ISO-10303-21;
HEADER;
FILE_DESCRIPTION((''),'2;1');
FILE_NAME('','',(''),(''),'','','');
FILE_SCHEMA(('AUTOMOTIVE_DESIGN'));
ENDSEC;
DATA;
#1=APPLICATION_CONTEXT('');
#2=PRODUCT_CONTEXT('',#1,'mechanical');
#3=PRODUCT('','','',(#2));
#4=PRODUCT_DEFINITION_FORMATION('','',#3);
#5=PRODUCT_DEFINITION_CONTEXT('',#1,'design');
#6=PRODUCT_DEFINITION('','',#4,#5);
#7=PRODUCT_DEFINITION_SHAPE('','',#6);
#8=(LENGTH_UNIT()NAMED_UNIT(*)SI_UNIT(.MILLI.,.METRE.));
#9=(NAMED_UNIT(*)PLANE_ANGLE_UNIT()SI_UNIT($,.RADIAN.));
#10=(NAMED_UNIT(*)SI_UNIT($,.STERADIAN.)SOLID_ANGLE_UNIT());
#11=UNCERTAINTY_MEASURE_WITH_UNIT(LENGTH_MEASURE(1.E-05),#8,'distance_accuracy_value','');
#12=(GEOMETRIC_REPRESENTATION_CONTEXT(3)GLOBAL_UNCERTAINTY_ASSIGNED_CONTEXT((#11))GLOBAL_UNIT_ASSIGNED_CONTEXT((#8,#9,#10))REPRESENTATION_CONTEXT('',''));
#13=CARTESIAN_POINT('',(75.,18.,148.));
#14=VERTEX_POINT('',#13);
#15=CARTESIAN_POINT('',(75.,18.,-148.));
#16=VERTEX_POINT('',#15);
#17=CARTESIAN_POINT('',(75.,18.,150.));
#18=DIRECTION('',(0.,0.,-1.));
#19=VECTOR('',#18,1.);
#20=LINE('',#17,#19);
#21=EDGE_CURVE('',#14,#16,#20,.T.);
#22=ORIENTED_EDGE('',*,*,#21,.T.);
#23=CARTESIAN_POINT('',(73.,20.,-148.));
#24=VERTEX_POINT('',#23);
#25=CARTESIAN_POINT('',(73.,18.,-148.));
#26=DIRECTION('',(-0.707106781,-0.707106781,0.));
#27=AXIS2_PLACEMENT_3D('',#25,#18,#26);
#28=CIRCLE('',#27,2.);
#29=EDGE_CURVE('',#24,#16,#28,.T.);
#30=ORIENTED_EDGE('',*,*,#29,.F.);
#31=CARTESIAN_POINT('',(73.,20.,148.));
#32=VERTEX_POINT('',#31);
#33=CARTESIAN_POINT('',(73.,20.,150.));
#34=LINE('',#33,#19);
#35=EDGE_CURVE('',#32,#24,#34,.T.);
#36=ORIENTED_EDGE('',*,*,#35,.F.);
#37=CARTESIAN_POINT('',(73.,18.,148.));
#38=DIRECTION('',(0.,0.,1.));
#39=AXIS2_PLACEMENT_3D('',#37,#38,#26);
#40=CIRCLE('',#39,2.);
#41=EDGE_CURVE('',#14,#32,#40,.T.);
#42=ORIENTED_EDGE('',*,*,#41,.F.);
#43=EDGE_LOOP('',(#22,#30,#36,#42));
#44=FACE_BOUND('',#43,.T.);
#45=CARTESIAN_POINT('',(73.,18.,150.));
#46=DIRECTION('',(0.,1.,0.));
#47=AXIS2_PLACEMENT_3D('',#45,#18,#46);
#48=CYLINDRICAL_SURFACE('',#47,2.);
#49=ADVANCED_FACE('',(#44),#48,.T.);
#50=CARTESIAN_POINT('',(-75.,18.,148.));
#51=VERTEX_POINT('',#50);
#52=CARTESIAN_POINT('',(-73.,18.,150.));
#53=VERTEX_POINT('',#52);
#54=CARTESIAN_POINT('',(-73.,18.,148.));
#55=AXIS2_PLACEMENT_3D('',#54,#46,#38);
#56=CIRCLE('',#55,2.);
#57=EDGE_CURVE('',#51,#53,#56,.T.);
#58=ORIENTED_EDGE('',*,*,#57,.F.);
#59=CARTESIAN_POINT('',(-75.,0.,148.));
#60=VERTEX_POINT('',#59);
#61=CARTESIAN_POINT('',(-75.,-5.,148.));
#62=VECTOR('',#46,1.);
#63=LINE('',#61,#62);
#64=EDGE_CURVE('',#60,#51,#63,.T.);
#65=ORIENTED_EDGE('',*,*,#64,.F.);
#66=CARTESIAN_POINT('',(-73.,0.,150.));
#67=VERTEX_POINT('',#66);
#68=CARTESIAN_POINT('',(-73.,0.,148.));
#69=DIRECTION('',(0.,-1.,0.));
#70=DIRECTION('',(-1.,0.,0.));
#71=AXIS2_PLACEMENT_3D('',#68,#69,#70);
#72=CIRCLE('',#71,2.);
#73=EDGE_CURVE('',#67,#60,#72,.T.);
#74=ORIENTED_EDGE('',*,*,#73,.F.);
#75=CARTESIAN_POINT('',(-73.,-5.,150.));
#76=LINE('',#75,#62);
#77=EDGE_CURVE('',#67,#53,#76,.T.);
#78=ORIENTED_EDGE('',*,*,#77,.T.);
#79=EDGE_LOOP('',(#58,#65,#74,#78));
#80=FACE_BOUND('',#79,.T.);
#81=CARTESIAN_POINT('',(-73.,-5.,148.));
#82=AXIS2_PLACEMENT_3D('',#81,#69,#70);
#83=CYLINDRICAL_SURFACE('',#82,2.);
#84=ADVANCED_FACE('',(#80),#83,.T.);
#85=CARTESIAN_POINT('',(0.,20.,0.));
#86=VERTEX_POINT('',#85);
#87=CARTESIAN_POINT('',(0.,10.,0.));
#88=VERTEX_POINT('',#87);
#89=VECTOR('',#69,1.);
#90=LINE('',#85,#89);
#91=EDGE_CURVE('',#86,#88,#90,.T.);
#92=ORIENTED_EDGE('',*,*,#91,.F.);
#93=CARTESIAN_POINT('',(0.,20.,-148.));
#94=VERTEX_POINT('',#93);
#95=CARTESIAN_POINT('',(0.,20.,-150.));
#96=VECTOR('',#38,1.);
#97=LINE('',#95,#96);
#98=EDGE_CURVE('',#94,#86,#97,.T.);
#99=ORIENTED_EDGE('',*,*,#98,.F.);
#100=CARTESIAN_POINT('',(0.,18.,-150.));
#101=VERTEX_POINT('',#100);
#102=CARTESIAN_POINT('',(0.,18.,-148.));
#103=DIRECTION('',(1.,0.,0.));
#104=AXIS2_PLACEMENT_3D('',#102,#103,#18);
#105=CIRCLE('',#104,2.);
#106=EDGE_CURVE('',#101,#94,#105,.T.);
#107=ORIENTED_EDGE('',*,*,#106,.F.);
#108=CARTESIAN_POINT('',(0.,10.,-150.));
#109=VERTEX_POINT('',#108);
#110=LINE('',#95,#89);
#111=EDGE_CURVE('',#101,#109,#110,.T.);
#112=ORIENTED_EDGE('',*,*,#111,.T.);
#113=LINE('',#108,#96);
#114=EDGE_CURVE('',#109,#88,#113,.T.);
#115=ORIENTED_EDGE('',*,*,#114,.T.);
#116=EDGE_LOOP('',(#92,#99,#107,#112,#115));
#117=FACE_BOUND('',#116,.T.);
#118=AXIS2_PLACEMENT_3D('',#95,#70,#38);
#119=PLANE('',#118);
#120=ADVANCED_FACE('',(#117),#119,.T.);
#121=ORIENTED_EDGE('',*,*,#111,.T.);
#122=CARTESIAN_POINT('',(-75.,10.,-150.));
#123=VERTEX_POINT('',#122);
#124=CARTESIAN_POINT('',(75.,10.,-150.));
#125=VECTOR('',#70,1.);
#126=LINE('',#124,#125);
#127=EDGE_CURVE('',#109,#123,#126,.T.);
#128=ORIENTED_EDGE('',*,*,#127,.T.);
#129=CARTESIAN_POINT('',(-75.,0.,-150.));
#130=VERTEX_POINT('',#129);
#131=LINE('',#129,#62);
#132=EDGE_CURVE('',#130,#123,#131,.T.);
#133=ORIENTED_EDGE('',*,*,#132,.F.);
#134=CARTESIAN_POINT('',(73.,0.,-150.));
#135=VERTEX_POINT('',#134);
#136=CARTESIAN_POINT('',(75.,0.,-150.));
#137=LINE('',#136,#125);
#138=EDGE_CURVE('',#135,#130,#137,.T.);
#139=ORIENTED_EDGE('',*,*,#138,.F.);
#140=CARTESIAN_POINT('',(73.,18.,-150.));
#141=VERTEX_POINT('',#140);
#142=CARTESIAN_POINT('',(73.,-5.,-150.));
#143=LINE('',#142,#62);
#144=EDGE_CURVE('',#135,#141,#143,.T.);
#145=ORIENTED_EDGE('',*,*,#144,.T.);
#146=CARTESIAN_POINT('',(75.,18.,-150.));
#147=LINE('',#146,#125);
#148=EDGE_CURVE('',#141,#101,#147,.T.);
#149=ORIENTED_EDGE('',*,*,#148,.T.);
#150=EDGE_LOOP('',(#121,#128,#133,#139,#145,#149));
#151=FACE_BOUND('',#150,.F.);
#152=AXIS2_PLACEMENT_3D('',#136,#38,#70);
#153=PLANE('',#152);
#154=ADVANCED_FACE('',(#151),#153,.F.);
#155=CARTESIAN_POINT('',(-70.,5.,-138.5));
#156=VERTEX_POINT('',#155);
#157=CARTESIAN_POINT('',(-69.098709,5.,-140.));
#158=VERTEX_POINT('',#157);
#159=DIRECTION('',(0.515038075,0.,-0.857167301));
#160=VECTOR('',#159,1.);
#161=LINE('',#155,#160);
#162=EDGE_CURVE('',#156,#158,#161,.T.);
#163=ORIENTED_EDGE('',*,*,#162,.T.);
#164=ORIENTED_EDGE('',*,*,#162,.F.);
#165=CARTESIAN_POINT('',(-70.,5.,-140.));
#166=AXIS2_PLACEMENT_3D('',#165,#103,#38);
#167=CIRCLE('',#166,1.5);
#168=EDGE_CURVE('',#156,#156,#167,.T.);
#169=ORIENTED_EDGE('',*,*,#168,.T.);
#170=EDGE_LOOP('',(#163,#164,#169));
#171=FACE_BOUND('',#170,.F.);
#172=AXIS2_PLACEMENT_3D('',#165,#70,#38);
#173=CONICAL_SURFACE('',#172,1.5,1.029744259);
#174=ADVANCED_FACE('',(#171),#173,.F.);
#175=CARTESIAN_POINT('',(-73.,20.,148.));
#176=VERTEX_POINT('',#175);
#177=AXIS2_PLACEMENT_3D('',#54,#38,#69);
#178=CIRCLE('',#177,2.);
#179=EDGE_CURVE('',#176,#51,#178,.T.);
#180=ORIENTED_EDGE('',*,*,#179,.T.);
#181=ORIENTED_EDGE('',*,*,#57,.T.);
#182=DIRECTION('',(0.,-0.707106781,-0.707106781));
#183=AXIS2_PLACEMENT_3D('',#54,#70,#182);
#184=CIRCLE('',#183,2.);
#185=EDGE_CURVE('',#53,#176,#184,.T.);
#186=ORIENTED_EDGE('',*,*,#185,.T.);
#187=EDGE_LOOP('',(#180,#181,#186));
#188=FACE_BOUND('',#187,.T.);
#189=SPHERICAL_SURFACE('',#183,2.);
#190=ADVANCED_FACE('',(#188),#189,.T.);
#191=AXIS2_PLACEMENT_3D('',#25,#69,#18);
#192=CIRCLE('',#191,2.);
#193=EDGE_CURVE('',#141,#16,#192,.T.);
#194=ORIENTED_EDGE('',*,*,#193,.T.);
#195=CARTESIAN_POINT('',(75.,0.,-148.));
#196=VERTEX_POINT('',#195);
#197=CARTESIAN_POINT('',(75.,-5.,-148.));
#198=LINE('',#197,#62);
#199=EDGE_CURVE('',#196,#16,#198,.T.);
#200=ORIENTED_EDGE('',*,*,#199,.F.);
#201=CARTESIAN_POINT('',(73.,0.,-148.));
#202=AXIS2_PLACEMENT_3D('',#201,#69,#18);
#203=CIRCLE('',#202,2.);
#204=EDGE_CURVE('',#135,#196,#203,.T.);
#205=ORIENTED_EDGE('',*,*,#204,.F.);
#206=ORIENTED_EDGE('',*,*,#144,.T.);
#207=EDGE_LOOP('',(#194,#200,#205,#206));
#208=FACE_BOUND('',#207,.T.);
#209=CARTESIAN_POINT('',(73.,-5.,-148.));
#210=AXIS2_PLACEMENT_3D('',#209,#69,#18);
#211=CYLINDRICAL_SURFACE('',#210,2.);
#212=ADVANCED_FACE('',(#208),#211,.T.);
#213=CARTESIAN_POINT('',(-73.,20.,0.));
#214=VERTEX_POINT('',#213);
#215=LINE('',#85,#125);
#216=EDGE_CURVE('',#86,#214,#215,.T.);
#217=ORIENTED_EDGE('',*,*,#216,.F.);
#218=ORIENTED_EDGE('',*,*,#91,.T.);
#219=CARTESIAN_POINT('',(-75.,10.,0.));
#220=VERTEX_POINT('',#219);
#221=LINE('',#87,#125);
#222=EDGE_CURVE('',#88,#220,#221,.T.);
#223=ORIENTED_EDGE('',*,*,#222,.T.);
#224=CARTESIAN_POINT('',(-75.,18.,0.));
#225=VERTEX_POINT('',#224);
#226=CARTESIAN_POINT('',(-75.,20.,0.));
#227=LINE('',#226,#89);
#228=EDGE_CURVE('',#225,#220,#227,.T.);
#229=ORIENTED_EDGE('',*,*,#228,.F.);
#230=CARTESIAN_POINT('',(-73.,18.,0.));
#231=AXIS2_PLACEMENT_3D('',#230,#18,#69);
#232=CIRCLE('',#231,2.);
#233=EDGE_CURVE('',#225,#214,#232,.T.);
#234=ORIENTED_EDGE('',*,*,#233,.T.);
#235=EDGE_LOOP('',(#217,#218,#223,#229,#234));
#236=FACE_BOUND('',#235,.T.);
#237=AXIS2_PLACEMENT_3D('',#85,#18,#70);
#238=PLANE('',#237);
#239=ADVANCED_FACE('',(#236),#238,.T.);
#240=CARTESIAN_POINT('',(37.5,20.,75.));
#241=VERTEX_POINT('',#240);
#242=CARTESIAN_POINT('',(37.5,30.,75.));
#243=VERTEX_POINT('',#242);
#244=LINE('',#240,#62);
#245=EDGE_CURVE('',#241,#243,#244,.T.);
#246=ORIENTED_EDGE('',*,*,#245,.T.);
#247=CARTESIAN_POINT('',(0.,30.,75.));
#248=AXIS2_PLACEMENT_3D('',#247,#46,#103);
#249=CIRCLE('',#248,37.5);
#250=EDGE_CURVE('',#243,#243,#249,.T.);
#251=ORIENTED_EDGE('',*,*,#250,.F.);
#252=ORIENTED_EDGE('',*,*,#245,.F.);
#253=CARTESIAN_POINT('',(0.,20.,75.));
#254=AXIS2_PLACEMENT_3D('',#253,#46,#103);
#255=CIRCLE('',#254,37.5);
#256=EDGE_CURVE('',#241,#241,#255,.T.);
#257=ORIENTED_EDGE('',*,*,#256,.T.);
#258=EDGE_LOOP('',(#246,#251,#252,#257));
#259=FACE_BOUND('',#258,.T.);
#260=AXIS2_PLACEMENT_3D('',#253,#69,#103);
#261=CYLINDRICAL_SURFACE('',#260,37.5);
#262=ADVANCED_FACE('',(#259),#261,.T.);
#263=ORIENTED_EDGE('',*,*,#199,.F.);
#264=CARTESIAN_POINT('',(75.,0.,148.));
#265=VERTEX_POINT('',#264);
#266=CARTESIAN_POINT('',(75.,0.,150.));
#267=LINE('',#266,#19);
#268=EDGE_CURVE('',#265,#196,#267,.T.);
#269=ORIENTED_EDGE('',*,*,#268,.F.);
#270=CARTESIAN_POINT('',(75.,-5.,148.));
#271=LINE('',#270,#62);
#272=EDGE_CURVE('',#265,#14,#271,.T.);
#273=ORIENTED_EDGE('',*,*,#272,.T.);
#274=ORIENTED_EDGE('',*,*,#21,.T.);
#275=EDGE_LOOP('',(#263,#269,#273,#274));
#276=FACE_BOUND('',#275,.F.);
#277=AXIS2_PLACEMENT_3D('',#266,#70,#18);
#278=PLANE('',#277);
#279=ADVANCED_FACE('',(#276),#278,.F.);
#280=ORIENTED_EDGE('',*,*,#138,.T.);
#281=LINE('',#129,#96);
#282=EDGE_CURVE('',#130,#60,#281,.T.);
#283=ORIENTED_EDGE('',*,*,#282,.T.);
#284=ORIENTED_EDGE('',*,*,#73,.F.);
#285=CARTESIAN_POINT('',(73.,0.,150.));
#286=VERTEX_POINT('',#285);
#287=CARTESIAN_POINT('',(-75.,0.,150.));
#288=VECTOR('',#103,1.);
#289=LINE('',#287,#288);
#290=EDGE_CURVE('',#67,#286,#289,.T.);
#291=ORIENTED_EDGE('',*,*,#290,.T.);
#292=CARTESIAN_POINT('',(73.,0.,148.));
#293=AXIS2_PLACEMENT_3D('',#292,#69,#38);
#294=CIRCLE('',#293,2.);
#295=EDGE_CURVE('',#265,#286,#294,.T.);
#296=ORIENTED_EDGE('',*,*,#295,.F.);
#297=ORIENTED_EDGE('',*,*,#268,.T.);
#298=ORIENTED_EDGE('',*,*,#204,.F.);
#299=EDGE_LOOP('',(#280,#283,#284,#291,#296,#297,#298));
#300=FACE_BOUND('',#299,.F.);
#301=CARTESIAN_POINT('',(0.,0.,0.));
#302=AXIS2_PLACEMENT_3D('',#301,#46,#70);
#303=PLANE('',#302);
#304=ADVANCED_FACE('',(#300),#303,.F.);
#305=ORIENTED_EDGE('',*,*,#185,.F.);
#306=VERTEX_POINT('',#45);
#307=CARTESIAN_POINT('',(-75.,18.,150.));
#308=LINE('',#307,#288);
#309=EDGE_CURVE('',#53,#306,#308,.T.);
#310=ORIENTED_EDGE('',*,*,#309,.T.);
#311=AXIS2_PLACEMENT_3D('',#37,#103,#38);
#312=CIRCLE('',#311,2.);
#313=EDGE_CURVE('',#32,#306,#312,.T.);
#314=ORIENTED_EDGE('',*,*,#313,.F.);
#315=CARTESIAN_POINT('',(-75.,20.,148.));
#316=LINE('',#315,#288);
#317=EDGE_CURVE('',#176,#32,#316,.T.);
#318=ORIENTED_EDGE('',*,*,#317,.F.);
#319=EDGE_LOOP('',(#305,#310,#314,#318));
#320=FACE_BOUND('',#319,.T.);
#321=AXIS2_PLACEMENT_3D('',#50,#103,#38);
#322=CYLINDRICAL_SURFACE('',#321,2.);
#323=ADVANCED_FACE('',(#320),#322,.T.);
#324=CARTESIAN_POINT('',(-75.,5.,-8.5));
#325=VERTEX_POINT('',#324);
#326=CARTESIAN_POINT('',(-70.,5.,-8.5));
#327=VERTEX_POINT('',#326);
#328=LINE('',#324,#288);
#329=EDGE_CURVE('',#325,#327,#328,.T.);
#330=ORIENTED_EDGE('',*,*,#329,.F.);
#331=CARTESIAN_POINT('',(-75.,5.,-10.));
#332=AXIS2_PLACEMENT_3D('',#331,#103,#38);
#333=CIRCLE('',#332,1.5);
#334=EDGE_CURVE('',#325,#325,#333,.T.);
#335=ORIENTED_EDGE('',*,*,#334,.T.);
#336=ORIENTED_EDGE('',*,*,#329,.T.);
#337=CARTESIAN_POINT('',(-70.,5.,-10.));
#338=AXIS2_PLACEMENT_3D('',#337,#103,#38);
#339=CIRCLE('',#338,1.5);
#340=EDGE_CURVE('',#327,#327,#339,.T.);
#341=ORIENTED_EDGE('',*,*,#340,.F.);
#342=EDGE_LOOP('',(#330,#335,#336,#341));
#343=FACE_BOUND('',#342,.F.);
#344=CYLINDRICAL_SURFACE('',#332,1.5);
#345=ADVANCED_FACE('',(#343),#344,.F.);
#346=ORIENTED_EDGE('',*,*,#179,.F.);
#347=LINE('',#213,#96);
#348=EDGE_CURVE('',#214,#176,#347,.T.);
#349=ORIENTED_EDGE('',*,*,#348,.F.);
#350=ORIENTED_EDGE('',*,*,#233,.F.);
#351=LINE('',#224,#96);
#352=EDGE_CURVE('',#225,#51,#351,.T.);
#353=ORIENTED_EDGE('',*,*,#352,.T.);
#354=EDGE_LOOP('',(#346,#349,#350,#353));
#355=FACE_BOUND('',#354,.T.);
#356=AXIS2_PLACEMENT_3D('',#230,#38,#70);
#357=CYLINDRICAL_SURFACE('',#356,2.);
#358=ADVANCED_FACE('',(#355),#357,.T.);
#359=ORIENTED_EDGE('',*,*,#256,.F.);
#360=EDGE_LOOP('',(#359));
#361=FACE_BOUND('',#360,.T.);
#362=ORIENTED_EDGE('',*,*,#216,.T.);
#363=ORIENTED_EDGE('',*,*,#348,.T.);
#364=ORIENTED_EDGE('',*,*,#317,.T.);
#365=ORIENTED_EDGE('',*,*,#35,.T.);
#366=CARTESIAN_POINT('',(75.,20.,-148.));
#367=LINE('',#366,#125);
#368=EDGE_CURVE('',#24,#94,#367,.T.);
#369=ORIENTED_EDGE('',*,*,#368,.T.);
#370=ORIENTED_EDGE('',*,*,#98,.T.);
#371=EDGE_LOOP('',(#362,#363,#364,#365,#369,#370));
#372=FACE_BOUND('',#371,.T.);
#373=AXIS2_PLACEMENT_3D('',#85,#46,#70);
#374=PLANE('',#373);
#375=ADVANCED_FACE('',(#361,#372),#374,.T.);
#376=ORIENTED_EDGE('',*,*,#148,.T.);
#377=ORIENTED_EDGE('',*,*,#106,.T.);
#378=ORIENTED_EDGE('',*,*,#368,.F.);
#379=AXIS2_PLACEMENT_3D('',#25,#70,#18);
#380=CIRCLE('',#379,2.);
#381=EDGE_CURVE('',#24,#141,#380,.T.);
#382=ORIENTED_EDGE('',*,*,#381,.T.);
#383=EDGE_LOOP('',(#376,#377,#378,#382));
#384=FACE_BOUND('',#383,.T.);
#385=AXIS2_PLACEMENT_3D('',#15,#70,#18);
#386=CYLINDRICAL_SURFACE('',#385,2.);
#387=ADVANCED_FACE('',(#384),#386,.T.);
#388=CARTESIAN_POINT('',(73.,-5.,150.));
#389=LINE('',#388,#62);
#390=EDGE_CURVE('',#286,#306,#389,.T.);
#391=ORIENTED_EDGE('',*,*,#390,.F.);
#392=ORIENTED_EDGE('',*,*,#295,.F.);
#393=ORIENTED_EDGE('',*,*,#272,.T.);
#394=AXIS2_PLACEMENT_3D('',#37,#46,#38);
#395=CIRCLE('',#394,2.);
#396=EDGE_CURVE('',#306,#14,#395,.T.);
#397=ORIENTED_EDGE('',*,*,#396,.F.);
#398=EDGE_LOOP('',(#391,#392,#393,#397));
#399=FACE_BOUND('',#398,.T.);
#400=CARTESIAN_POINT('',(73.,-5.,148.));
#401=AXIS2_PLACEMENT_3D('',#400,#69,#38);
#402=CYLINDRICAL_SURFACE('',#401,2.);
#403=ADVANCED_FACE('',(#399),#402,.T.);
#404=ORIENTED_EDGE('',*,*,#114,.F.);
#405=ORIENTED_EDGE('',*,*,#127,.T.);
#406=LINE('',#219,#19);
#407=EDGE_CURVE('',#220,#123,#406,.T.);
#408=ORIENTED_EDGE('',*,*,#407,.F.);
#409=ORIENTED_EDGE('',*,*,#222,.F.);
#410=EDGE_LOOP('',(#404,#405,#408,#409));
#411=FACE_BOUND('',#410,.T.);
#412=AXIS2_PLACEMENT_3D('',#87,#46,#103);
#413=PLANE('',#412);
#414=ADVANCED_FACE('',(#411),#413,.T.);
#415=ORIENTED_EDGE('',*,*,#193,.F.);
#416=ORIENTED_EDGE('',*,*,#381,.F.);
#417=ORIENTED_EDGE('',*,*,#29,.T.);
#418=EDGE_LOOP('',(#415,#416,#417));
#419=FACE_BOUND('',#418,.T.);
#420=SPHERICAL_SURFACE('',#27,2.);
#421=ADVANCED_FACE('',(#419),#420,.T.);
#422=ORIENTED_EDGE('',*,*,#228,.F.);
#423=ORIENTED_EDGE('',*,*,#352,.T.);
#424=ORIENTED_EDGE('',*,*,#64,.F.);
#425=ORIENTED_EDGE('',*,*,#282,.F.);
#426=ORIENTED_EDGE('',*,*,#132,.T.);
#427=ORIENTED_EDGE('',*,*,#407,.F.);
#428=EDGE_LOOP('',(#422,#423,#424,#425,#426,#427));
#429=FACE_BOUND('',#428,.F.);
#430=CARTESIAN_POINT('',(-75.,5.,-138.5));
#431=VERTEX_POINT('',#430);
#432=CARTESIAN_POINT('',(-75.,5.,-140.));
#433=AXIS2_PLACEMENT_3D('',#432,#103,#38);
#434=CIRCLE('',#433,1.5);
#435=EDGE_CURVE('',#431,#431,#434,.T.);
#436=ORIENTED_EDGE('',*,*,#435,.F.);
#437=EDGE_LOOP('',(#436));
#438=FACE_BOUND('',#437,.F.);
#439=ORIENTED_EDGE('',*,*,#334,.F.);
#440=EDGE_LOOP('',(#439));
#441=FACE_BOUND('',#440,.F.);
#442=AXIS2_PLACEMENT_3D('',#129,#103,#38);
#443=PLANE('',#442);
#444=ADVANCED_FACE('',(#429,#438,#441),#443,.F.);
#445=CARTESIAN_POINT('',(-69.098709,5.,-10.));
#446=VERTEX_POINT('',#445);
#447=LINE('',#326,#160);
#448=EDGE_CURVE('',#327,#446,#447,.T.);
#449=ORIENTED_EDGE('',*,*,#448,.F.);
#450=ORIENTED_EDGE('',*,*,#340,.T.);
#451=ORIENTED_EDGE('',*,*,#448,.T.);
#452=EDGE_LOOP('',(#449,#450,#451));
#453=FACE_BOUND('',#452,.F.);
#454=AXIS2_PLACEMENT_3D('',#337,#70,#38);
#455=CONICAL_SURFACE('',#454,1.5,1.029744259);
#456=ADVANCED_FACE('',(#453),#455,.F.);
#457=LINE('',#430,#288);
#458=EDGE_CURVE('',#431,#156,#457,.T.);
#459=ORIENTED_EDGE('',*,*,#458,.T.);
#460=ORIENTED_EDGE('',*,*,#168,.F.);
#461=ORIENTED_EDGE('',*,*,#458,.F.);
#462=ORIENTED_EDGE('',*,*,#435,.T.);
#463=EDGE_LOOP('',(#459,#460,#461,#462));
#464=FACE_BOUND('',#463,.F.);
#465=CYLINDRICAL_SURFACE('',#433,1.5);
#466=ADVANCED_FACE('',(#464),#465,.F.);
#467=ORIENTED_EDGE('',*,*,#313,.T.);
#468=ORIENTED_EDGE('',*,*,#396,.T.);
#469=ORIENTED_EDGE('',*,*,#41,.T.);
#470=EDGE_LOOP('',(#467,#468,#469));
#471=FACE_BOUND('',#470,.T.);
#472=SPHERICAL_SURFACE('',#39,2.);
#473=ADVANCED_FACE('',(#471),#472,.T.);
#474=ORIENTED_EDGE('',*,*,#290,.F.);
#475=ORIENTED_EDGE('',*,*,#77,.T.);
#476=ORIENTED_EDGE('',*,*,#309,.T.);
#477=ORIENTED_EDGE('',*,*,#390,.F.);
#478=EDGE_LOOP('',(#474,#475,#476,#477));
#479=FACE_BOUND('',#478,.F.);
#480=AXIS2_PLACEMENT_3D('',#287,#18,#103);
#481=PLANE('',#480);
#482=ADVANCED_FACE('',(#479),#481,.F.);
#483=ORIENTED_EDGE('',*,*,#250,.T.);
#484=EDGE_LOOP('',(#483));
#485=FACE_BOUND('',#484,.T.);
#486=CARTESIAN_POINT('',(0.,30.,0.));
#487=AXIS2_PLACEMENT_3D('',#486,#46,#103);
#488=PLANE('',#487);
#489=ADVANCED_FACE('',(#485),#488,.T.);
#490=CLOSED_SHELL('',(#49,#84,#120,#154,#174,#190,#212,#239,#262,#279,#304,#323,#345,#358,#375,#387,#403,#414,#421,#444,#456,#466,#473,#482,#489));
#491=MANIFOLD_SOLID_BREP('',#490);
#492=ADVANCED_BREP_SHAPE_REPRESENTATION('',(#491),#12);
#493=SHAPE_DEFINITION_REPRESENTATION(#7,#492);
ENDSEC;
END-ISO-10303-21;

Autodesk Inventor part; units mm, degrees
ref_plane "YZ Plane" through (0, 0, 0) normal (1, 0, 0) x (0, 1, 0)
ref_plane "XZ Plane" through (0, 0, 0) normal (0, 1, 0) x (-1, 0, 0)
ref_plane "XY Plane" through (0, 0, 0) normal (0, 0, 1) x (1, 0, 0)
sketch "Sketch3" plane through (0, 0, 0) normal (0, 1, 0) x (-1, 0, 0)
  line L0 (75, 150) -> (-75, 150)
  line L1 (-75, 150) -> (-75, -150)
  line L2 (-75, -150) -> (75, -150)
  line L3 (75, -150) -> (75, 150)
  line L4 (75, 150) -> (-75, -150) construction
  line L5 (-75, 150) -> (75, -150) construction
  point P0 (0, 0)
  dimension "d7" = 150
  dimension "d8" = 300
extrude "Extrusion3" add sketch "Sketch3" along normal blind 20
sketch "Sketch4" plane through (0, 20, 0) normal (0, 1, 0) x (1, 0, 0)
  line L0 (75, 150) -> (-75, 150) projected
  line L1 (-75, 150) -> (0, 150)
  line L2 (0, 150) -> (0, 0)
  line L3 (0, 0) -> (-75, 0)
  line L4 (-75, 0) -> (-75, 150)
  dimension "d11" = 75
  dimension "d12" = 150
extrude "Extrusion4" cut sketch "Sketch4" against normal blind 10
sketch "Sketch5" plane through (-75, 0, -150) normal (-1, 0, 0) x (0, 0, 1)
  line L0 (0, 0) -> (300, 0) projected
  line L1 (0, 0) -> (0, 10) projected
  line L2 (150, 20) -> (150, 10) projected
  point P0 (150, 0)
  point P1 (10, 5)
  point P2 (140, 5)
  dimension "d15" = 5
  dimension "d16" = 5
  dimension "d17" = 10
  dimension "d18" = 10
hole "Hole1" at (-75, 5, -10) at (-75, 5, -140) direction (1, 0, 0) diameter 3 depth 5 tip angle 118
fillet "Fillet1" radius 2 4 edges at (75, 20, 0) (0, 20, 150) (37.5, 20, -150) (-75, 20, 75)
fillet "Fillet2" radius 2 6 edges at (74.4142, 19.4142, 149.4142) (75, 9, 150) (-74.4142, 19.4142, 149.4142) (-75, 9, 150) (74.4142, 19.4142, -149.4142) (75, 9, -150)
sketch "Sketch6" plane through (0, 20, 0) normal (0, 1, 0) x (1, 0, 0)
  circle A0 centre (0, -75) radius 37.5
  line L0 (-73, -150) -> (73, -150) projected
  line L1 (-75, 0) -> (-75, -148) projected
  point P0 (0, 0)
  dimension "d28" = 75
  dimension "d29" = 75
  dimension "d30" = 75
extrude "Extrusion5" add sketch "Sketch6" along normal blind 10
